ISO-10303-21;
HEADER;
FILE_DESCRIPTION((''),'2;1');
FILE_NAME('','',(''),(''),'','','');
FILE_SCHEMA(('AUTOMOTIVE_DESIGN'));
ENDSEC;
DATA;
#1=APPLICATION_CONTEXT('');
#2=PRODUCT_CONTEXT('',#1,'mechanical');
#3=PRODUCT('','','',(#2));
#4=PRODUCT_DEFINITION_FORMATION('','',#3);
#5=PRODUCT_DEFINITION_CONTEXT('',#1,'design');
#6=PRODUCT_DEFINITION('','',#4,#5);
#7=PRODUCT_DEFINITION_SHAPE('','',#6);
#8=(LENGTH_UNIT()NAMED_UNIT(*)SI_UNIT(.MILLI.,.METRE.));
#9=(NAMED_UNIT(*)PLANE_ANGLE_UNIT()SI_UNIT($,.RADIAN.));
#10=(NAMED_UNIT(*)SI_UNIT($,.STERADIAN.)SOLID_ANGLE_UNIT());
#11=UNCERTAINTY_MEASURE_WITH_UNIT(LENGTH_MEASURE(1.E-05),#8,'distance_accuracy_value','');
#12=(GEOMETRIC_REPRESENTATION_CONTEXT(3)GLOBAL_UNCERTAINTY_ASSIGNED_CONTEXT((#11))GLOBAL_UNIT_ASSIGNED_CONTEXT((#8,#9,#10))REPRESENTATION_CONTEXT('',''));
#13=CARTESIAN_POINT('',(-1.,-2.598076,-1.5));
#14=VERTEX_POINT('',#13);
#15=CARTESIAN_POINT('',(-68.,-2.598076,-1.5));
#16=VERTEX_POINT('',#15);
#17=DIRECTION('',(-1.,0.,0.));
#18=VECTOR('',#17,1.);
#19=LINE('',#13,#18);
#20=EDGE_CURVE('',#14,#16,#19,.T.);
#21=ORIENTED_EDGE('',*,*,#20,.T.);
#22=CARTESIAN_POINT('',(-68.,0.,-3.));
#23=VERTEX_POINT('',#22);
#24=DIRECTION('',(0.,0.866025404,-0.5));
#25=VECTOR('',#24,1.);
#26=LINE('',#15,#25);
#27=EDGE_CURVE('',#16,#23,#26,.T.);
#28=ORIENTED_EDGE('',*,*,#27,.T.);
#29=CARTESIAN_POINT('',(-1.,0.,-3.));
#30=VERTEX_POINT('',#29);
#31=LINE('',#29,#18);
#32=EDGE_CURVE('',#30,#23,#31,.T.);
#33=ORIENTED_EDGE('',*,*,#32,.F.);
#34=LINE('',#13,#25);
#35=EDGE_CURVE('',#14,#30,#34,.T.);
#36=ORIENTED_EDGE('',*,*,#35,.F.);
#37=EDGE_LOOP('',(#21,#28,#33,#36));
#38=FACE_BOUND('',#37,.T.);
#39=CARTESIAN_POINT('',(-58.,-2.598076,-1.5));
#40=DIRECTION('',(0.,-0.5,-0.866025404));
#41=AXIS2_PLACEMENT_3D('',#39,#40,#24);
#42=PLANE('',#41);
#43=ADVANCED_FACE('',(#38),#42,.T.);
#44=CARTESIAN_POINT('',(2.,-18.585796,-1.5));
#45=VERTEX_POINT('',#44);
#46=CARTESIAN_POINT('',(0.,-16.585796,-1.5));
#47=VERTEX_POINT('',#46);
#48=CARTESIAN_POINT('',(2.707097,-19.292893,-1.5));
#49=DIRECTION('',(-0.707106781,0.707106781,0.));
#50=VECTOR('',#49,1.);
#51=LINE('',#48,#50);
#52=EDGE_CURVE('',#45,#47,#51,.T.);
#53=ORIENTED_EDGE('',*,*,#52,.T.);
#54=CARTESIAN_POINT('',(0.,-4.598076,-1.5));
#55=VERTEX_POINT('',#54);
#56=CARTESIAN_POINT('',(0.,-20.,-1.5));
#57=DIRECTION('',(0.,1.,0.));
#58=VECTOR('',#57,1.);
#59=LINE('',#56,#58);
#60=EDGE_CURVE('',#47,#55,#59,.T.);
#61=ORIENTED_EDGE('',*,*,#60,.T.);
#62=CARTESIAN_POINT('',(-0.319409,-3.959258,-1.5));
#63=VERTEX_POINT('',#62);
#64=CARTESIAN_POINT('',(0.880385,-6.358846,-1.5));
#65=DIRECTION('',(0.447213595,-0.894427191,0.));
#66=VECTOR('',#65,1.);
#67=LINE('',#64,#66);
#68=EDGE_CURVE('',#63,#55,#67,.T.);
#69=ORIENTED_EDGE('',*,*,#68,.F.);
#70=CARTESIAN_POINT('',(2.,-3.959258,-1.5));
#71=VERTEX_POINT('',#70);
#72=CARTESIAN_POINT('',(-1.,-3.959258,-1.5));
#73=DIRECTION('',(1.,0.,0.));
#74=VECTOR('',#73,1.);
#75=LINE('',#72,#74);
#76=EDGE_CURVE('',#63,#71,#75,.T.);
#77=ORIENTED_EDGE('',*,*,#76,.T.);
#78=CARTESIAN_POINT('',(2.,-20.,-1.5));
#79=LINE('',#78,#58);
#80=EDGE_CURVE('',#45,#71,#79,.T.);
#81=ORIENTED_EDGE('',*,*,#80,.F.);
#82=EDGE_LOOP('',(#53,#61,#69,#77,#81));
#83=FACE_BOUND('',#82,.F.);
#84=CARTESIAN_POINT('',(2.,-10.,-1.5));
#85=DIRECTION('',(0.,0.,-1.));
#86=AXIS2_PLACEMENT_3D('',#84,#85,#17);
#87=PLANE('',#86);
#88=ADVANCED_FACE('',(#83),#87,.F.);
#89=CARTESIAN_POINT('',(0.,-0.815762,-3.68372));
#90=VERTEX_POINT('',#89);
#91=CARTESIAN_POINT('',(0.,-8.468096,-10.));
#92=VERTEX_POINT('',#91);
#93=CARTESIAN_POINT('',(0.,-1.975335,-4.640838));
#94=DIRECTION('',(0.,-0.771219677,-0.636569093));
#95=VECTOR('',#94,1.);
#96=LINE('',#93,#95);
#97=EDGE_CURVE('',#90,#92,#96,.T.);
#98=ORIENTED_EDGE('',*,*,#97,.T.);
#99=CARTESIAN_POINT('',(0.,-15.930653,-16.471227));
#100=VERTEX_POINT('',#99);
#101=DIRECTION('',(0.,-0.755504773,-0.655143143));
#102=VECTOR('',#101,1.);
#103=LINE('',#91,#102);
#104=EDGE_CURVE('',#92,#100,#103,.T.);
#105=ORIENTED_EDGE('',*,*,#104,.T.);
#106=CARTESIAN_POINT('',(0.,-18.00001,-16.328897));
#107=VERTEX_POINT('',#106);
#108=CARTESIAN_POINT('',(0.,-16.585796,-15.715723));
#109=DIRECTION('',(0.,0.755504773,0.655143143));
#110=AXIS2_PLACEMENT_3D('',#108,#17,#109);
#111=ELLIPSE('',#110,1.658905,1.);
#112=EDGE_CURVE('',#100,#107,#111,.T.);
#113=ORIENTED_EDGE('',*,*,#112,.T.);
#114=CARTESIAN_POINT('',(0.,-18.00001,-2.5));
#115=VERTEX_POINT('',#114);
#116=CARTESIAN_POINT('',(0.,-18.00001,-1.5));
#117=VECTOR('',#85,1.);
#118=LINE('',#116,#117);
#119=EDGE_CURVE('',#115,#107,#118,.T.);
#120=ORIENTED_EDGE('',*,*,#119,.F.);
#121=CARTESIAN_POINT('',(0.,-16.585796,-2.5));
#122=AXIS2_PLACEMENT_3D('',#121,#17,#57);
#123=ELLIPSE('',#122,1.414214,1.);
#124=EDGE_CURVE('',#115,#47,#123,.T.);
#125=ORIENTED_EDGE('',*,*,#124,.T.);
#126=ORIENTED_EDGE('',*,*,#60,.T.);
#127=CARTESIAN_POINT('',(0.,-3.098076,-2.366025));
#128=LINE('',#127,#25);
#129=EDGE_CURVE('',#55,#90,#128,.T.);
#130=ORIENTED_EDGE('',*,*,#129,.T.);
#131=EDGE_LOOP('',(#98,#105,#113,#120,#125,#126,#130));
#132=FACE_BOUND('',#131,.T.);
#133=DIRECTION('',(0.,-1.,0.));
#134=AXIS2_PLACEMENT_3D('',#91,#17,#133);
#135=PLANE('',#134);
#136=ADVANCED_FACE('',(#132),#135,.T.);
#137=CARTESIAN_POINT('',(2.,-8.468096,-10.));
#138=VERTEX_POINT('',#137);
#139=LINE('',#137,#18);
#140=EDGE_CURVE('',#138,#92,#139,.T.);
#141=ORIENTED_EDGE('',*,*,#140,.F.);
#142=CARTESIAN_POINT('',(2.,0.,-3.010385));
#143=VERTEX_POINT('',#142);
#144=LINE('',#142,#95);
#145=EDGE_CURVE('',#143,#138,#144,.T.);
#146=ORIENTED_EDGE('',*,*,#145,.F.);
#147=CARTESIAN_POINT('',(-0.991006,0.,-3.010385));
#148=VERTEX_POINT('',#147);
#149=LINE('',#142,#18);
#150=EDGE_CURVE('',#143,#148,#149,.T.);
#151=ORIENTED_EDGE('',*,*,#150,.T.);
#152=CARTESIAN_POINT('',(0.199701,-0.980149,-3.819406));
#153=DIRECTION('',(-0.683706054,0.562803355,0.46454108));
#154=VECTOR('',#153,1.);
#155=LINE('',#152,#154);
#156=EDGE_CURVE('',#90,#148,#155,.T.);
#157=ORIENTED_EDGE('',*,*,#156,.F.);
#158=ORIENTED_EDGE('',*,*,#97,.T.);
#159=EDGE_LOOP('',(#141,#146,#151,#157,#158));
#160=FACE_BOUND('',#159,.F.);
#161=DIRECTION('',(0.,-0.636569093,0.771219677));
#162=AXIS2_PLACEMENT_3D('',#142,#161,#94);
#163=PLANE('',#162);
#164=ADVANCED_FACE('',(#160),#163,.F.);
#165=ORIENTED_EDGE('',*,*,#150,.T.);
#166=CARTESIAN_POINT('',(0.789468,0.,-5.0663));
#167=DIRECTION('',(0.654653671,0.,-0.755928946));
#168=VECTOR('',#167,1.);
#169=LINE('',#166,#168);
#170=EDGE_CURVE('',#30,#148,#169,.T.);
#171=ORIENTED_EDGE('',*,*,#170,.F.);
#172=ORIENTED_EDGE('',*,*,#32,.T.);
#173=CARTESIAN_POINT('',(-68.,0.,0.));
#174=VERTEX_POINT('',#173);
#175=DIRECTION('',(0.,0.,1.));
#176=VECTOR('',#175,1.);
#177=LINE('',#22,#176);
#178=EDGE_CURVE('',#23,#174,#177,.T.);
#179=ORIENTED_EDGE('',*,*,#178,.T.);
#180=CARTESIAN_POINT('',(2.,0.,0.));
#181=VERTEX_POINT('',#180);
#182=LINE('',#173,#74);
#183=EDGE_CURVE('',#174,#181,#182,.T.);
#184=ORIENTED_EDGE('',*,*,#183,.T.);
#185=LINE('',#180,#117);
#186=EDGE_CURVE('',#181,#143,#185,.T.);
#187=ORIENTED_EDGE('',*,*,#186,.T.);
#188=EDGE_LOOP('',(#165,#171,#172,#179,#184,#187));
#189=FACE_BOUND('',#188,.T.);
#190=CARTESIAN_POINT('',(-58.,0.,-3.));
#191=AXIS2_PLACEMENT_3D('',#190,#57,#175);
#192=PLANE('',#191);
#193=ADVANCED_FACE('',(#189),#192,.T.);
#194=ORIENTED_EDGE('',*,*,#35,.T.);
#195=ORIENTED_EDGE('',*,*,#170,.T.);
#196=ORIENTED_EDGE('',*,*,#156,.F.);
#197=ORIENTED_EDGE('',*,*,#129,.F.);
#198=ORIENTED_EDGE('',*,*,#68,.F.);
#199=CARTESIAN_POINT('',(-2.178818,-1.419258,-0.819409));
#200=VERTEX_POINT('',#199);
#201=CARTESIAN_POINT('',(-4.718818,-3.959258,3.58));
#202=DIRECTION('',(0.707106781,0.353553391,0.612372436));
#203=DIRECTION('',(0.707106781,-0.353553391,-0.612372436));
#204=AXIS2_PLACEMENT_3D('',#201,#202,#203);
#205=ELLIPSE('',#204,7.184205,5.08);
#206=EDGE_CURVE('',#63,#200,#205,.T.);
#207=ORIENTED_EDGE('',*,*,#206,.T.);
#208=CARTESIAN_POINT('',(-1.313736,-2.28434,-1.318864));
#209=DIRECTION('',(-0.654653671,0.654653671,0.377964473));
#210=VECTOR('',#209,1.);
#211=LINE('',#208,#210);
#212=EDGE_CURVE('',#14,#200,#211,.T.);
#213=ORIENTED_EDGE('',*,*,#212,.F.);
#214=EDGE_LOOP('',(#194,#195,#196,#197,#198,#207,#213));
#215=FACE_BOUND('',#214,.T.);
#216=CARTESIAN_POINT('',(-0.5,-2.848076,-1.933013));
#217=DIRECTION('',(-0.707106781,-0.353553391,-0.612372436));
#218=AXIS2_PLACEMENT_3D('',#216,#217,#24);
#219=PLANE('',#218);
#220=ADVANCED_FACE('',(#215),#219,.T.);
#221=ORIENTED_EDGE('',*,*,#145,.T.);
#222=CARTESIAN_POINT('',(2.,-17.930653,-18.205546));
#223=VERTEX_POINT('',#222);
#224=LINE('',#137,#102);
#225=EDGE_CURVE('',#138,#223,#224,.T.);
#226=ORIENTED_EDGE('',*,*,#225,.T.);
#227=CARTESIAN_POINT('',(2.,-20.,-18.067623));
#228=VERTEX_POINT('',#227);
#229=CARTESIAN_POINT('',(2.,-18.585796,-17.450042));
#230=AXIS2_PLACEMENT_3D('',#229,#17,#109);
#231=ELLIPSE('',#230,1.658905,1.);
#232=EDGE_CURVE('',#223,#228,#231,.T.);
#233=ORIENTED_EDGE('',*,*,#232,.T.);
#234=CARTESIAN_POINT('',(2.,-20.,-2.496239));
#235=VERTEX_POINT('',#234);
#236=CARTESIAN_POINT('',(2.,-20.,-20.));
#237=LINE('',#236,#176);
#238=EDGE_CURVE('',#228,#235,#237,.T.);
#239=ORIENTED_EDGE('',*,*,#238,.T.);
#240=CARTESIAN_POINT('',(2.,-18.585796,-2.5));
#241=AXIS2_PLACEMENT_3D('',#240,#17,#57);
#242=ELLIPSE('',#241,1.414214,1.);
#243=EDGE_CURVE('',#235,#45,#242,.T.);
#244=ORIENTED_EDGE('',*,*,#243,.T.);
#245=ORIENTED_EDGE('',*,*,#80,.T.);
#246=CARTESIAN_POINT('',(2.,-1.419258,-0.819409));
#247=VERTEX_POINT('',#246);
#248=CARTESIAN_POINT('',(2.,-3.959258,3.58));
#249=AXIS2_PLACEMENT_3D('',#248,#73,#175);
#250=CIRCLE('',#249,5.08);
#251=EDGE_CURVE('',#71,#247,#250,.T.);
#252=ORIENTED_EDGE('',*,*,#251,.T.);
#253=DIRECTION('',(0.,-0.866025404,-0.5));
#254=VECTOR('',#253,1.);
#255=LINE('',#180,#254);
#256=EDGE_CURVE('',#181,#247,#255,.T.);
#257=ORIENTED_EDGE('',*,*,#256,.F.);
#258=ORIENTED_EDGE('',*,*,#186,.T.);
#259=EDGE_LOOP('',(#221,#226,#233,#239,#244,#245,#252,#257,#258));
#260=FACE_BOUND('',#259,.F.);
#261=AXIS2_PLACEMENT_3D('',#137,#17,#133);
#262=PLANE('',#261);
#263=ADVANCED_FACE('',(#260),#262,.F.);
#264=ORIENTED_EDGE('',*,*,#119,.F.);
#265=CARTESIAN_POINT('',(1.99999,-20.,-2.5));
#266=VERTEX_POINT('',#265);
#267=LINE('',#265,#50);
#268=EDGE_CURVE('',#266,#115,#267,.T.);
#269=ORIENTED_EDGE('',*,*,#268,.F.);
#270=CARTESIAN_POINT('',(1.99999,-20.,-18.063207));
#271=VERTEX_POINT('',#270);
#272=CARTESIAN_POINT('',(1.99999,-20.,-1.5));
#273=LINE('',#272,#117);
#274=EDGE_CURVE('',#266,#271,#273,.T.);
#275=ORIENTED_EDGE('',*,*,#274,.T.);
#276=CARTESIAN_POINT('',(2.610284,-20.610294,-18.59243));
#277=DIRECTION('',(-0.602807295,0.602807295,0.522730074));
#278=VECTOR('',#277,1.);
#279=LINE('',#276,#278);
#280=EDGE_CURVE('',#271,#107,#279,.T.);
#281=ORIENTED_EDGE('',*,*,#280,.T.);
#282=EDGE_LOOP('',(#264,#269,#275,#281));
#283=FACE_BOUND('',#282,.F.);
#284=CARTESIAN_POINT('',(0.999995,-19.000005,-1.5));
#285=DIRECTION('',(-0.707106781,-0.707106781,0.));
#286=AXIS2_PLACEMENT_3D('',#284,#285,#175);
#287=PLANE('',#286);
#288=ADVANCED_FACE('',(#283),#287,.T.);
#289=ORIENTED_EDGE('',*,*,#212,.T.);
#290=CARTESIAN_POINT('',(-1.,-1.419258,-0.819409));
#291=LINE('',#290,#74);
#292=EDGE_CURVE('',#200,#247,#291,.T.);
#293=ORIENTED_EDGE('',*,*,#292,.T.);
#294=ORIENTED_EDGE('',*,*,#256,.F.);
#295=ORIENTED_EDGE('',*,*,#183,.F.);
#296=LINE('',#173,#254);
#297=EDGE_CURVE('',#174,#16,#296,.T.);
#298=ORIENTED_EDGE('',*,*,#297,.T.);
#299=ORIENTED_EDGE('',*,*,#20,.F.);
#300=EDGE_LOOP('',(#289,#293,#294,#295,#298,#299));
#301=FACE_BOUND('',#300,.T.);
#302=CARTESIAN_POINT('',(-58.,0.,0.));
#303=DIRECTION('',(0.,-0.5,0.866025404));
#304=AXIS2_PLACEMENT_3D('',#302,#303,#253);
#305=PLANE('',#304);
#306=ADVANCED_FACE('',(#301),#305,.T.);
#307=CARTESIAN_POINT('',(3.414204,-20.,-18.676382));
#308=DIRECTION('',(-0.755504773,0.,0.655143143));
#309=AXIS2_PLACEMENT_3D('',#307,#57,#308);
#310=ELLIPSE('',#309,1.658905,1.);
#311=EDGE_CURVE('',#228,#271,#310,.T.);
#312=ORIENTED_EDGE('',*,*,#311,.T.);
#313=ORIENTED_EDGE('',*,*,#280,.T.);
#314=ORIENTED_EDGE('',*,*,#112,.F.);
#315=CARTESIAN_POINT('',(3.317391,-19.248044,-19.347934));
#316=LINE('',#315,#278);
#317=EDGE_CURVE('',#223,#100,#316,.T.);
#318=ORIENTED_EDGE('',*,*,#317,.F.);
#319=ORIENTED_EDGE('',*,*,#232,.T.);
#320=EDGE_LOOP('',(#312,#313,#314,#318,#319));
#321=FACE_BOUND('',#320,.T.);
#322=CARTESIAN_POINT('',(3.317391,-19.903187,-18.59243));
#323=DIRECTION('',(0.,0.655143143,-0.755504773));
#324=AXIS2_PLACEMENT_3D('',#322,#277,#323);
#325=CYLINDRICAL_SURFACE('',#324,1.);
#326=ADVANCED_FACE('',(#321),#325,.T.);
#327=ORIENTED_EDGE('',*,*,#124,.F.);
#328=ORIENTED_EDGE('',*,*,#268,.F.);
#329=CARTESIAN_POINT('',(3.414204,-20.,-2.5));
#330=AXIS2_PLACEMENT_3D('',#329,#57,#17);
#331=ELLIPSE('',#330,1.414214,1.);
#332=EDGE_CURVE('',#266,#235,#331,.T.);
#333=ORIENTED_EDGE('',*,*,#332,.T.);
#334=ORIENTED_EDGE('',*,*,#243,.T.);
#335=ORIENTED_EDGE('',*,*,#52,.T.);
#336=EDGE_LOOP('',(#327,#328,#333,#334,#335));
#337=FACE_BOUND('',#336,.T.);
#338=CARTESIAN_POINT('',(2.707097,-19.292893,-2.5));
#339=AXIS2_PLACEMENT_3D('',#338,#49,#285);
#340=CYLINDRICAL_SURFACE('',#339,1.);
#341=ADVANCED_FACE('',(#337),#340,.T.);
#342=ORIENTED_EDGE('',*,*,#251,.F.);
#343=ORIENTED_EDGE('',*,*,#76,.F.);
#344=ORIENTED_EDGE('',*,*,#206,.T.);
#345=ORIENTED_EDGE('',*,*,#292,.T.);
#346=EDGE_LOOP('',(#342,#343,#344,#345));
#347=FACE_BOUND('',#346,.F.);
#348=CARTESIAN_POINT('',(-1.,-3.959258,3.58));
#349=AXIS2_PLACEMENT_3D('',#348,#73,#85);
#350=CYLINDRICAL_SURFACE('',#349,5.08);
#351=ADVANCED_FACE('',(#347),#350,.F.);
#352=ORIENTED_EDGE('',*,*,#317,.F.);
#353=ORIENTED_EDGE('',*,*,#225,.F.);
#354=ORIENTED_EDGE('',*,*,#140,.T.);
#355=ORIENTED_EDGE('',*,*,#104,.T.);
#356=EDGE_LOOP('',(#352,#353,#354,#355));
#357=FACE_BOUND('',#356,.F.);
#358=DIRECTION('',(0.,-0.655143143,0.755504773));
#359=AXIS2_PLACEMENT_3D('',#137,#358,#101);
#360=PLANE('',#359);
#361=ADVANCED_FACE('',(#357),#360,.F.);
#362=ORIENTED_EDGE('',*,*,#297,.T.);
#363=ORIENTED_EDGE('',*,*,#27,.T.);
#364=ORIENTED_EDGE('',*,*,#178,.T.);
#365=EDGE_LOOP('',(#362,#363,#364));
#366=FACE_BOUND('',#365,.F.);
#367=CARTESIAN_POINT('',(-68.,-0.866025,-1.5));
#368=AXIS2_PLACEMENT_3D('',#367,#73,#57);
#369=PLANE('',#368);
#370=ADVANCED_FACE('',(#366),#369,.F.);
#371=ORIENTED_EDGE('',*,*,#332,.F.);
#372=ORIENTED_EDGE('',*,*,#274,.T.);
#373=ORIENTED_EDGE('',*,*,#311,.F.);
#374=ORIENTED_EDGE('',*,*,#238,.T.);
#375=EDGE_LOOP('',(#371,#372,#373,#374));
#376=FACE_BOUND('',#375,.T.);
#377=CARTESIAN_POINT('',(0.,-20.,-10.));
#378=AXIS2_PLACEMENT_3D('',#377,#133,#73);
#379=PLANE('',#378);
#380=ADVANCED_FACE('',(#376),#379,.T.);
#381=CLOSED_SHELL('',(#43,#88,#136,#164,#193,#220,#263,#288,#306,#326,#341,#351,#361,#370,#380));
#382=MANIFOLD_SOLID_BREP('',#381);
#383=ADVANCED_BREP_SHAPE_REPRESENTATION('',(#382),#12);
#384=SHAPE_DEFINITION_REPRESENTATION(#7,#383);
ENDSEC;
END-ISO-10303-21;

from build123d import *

# Parameters (mm, degrees)
F0_W      = 10
F0_H      = 10
F1_DEPTH  = 2
F3_DEPTH  = 60
F5_DEPTH  = 2
F7_DEPTH  = 2
F9_SIZE   = 1
F10_R     = 5.08
F11_DEPTH = 2.9920059478
F12_DEPTH = 10
F13_DEPTH = 10
F14_DEPTH = 10
F16_DEPTH = 2
F17_SIZE  = 1.99999
F18_R     = 1


# Not quite as in the source:
# - a fillet or chamfer is up to 0.001 mm smaller than in the source, because OpenCascade refuses the exact size


with BuildPart() as f1:
    # F0 (on Right) → F1 (new body)
    with BuildSketch(Plane.YZ):
        with Locations((-5, -5)):
            Rectangle(F0_W, F0_H)
    extrude(amount=F1_DEPTH)

    # F2 (on face) → F3 (join)
    with BuildSketch(Plane.YZ.offset(2)):
        Polygon((0, -3), (0, 0), (-2.5980762114, -1.5), align=None)
    extrude(amount=-F3_DEPTH)

    # F4 (on face) → F5 (cut, through all)
    with BuildSketch(Plane(origin=(0, 0, 0), x_dir=(0, -1, 0), z_dir=(-1, 0, 0))):
        Polygon((10, 0), (0, 0), (2.5980762114, -1.5), align=None)
    extrude(amount=-F5_DEPTH, mode=Mode.SUBTRACT)

    # F6 (on face) → F7 (cut, through all)
    with BuildSketch(Plane.YZ.offset(2)):
        Polygon((-10, -1.5), (-2.5980762114, -1.5), (-10, 0), align=None)
    extrude(amount=-F7_DEPTH, mode=Mode.SUBTRACT)

    # F9
    f9_edges = [f1.edges().sort_by_distance(p)[0] for p in [
        (0, -1.299038, -2.25),
    ]]
    chamfer(f9_edges, length=F9_SIZE)

    # F10
    f10_edges = [f1.edges().sort_by_distance(p)[0] for p in [
        (1, -2.598076, -1.5),
    ]]
    fillet(f10_edges, radius=F10_R)

    # F8 (on face) → F11 (cut, through all)
    with BuildSketch(Plane.YZ.offset(2)):
        Polygon((0, -10), (0, -3.0103854369), (-8.4680961445, -10), align=None)
    extrude(amount=-F11_DEPTH, mode=Mode.SUBTRACT)

    # F12 (add): a face of the model
    f12_faces = [f1.faces().sort_by_distance(p)[0] for p in [
        (-58, -0.8660254038, -1.5),
    ]]
    extrude(f12_faces, amount=F12_DEPTH)

    # F13 (add): a face of the model
    f13_faces = [f1.faces().sort_by_distance(p)[0] for p in [
        (1, -10, -5.75),
    ]]
    extrude(f13_faces, amount=F13_DEPTH)

    # F14 (add): a face of the model
    f14_faces = [f1.faces().sort_by_distance(p)[0] for p in [
        (1, -14.2340480722, -10),
    ]]
    extrude(f14_faces, amount=F14_DEPTH)

    # F15 (on face) → F16 (cut, through all)
    with BuildSketch(Plane.YZ.offset(2)):
        Polygon((-8.4680961445, -20), (-8.4680961445, -10), (-20, -20), align=None)
    extrude(amount=-F16_DEPTH, mode=Mode.SUBTRACT)

    # F17 (size 2 in the source; OpenCascade refuses exactly that, so slightly less here)
    f17_edges = [f1.edges().sort_by_distance(p)[0] for p in [
        (0, -20, -10.75),
    ]]
    chamfer(f17_edges, length=F17_SIZE)

    # F18
    f18_edges = [f1.edges().sort_by_distance(p)[0] for p in [
        (0.999995, -19.000005, -1.5),
        (0.999995, -19.000005, -19.132845),
    ]]
    fillet(f18_edges, radius=F18_R)


solid = f1.part
